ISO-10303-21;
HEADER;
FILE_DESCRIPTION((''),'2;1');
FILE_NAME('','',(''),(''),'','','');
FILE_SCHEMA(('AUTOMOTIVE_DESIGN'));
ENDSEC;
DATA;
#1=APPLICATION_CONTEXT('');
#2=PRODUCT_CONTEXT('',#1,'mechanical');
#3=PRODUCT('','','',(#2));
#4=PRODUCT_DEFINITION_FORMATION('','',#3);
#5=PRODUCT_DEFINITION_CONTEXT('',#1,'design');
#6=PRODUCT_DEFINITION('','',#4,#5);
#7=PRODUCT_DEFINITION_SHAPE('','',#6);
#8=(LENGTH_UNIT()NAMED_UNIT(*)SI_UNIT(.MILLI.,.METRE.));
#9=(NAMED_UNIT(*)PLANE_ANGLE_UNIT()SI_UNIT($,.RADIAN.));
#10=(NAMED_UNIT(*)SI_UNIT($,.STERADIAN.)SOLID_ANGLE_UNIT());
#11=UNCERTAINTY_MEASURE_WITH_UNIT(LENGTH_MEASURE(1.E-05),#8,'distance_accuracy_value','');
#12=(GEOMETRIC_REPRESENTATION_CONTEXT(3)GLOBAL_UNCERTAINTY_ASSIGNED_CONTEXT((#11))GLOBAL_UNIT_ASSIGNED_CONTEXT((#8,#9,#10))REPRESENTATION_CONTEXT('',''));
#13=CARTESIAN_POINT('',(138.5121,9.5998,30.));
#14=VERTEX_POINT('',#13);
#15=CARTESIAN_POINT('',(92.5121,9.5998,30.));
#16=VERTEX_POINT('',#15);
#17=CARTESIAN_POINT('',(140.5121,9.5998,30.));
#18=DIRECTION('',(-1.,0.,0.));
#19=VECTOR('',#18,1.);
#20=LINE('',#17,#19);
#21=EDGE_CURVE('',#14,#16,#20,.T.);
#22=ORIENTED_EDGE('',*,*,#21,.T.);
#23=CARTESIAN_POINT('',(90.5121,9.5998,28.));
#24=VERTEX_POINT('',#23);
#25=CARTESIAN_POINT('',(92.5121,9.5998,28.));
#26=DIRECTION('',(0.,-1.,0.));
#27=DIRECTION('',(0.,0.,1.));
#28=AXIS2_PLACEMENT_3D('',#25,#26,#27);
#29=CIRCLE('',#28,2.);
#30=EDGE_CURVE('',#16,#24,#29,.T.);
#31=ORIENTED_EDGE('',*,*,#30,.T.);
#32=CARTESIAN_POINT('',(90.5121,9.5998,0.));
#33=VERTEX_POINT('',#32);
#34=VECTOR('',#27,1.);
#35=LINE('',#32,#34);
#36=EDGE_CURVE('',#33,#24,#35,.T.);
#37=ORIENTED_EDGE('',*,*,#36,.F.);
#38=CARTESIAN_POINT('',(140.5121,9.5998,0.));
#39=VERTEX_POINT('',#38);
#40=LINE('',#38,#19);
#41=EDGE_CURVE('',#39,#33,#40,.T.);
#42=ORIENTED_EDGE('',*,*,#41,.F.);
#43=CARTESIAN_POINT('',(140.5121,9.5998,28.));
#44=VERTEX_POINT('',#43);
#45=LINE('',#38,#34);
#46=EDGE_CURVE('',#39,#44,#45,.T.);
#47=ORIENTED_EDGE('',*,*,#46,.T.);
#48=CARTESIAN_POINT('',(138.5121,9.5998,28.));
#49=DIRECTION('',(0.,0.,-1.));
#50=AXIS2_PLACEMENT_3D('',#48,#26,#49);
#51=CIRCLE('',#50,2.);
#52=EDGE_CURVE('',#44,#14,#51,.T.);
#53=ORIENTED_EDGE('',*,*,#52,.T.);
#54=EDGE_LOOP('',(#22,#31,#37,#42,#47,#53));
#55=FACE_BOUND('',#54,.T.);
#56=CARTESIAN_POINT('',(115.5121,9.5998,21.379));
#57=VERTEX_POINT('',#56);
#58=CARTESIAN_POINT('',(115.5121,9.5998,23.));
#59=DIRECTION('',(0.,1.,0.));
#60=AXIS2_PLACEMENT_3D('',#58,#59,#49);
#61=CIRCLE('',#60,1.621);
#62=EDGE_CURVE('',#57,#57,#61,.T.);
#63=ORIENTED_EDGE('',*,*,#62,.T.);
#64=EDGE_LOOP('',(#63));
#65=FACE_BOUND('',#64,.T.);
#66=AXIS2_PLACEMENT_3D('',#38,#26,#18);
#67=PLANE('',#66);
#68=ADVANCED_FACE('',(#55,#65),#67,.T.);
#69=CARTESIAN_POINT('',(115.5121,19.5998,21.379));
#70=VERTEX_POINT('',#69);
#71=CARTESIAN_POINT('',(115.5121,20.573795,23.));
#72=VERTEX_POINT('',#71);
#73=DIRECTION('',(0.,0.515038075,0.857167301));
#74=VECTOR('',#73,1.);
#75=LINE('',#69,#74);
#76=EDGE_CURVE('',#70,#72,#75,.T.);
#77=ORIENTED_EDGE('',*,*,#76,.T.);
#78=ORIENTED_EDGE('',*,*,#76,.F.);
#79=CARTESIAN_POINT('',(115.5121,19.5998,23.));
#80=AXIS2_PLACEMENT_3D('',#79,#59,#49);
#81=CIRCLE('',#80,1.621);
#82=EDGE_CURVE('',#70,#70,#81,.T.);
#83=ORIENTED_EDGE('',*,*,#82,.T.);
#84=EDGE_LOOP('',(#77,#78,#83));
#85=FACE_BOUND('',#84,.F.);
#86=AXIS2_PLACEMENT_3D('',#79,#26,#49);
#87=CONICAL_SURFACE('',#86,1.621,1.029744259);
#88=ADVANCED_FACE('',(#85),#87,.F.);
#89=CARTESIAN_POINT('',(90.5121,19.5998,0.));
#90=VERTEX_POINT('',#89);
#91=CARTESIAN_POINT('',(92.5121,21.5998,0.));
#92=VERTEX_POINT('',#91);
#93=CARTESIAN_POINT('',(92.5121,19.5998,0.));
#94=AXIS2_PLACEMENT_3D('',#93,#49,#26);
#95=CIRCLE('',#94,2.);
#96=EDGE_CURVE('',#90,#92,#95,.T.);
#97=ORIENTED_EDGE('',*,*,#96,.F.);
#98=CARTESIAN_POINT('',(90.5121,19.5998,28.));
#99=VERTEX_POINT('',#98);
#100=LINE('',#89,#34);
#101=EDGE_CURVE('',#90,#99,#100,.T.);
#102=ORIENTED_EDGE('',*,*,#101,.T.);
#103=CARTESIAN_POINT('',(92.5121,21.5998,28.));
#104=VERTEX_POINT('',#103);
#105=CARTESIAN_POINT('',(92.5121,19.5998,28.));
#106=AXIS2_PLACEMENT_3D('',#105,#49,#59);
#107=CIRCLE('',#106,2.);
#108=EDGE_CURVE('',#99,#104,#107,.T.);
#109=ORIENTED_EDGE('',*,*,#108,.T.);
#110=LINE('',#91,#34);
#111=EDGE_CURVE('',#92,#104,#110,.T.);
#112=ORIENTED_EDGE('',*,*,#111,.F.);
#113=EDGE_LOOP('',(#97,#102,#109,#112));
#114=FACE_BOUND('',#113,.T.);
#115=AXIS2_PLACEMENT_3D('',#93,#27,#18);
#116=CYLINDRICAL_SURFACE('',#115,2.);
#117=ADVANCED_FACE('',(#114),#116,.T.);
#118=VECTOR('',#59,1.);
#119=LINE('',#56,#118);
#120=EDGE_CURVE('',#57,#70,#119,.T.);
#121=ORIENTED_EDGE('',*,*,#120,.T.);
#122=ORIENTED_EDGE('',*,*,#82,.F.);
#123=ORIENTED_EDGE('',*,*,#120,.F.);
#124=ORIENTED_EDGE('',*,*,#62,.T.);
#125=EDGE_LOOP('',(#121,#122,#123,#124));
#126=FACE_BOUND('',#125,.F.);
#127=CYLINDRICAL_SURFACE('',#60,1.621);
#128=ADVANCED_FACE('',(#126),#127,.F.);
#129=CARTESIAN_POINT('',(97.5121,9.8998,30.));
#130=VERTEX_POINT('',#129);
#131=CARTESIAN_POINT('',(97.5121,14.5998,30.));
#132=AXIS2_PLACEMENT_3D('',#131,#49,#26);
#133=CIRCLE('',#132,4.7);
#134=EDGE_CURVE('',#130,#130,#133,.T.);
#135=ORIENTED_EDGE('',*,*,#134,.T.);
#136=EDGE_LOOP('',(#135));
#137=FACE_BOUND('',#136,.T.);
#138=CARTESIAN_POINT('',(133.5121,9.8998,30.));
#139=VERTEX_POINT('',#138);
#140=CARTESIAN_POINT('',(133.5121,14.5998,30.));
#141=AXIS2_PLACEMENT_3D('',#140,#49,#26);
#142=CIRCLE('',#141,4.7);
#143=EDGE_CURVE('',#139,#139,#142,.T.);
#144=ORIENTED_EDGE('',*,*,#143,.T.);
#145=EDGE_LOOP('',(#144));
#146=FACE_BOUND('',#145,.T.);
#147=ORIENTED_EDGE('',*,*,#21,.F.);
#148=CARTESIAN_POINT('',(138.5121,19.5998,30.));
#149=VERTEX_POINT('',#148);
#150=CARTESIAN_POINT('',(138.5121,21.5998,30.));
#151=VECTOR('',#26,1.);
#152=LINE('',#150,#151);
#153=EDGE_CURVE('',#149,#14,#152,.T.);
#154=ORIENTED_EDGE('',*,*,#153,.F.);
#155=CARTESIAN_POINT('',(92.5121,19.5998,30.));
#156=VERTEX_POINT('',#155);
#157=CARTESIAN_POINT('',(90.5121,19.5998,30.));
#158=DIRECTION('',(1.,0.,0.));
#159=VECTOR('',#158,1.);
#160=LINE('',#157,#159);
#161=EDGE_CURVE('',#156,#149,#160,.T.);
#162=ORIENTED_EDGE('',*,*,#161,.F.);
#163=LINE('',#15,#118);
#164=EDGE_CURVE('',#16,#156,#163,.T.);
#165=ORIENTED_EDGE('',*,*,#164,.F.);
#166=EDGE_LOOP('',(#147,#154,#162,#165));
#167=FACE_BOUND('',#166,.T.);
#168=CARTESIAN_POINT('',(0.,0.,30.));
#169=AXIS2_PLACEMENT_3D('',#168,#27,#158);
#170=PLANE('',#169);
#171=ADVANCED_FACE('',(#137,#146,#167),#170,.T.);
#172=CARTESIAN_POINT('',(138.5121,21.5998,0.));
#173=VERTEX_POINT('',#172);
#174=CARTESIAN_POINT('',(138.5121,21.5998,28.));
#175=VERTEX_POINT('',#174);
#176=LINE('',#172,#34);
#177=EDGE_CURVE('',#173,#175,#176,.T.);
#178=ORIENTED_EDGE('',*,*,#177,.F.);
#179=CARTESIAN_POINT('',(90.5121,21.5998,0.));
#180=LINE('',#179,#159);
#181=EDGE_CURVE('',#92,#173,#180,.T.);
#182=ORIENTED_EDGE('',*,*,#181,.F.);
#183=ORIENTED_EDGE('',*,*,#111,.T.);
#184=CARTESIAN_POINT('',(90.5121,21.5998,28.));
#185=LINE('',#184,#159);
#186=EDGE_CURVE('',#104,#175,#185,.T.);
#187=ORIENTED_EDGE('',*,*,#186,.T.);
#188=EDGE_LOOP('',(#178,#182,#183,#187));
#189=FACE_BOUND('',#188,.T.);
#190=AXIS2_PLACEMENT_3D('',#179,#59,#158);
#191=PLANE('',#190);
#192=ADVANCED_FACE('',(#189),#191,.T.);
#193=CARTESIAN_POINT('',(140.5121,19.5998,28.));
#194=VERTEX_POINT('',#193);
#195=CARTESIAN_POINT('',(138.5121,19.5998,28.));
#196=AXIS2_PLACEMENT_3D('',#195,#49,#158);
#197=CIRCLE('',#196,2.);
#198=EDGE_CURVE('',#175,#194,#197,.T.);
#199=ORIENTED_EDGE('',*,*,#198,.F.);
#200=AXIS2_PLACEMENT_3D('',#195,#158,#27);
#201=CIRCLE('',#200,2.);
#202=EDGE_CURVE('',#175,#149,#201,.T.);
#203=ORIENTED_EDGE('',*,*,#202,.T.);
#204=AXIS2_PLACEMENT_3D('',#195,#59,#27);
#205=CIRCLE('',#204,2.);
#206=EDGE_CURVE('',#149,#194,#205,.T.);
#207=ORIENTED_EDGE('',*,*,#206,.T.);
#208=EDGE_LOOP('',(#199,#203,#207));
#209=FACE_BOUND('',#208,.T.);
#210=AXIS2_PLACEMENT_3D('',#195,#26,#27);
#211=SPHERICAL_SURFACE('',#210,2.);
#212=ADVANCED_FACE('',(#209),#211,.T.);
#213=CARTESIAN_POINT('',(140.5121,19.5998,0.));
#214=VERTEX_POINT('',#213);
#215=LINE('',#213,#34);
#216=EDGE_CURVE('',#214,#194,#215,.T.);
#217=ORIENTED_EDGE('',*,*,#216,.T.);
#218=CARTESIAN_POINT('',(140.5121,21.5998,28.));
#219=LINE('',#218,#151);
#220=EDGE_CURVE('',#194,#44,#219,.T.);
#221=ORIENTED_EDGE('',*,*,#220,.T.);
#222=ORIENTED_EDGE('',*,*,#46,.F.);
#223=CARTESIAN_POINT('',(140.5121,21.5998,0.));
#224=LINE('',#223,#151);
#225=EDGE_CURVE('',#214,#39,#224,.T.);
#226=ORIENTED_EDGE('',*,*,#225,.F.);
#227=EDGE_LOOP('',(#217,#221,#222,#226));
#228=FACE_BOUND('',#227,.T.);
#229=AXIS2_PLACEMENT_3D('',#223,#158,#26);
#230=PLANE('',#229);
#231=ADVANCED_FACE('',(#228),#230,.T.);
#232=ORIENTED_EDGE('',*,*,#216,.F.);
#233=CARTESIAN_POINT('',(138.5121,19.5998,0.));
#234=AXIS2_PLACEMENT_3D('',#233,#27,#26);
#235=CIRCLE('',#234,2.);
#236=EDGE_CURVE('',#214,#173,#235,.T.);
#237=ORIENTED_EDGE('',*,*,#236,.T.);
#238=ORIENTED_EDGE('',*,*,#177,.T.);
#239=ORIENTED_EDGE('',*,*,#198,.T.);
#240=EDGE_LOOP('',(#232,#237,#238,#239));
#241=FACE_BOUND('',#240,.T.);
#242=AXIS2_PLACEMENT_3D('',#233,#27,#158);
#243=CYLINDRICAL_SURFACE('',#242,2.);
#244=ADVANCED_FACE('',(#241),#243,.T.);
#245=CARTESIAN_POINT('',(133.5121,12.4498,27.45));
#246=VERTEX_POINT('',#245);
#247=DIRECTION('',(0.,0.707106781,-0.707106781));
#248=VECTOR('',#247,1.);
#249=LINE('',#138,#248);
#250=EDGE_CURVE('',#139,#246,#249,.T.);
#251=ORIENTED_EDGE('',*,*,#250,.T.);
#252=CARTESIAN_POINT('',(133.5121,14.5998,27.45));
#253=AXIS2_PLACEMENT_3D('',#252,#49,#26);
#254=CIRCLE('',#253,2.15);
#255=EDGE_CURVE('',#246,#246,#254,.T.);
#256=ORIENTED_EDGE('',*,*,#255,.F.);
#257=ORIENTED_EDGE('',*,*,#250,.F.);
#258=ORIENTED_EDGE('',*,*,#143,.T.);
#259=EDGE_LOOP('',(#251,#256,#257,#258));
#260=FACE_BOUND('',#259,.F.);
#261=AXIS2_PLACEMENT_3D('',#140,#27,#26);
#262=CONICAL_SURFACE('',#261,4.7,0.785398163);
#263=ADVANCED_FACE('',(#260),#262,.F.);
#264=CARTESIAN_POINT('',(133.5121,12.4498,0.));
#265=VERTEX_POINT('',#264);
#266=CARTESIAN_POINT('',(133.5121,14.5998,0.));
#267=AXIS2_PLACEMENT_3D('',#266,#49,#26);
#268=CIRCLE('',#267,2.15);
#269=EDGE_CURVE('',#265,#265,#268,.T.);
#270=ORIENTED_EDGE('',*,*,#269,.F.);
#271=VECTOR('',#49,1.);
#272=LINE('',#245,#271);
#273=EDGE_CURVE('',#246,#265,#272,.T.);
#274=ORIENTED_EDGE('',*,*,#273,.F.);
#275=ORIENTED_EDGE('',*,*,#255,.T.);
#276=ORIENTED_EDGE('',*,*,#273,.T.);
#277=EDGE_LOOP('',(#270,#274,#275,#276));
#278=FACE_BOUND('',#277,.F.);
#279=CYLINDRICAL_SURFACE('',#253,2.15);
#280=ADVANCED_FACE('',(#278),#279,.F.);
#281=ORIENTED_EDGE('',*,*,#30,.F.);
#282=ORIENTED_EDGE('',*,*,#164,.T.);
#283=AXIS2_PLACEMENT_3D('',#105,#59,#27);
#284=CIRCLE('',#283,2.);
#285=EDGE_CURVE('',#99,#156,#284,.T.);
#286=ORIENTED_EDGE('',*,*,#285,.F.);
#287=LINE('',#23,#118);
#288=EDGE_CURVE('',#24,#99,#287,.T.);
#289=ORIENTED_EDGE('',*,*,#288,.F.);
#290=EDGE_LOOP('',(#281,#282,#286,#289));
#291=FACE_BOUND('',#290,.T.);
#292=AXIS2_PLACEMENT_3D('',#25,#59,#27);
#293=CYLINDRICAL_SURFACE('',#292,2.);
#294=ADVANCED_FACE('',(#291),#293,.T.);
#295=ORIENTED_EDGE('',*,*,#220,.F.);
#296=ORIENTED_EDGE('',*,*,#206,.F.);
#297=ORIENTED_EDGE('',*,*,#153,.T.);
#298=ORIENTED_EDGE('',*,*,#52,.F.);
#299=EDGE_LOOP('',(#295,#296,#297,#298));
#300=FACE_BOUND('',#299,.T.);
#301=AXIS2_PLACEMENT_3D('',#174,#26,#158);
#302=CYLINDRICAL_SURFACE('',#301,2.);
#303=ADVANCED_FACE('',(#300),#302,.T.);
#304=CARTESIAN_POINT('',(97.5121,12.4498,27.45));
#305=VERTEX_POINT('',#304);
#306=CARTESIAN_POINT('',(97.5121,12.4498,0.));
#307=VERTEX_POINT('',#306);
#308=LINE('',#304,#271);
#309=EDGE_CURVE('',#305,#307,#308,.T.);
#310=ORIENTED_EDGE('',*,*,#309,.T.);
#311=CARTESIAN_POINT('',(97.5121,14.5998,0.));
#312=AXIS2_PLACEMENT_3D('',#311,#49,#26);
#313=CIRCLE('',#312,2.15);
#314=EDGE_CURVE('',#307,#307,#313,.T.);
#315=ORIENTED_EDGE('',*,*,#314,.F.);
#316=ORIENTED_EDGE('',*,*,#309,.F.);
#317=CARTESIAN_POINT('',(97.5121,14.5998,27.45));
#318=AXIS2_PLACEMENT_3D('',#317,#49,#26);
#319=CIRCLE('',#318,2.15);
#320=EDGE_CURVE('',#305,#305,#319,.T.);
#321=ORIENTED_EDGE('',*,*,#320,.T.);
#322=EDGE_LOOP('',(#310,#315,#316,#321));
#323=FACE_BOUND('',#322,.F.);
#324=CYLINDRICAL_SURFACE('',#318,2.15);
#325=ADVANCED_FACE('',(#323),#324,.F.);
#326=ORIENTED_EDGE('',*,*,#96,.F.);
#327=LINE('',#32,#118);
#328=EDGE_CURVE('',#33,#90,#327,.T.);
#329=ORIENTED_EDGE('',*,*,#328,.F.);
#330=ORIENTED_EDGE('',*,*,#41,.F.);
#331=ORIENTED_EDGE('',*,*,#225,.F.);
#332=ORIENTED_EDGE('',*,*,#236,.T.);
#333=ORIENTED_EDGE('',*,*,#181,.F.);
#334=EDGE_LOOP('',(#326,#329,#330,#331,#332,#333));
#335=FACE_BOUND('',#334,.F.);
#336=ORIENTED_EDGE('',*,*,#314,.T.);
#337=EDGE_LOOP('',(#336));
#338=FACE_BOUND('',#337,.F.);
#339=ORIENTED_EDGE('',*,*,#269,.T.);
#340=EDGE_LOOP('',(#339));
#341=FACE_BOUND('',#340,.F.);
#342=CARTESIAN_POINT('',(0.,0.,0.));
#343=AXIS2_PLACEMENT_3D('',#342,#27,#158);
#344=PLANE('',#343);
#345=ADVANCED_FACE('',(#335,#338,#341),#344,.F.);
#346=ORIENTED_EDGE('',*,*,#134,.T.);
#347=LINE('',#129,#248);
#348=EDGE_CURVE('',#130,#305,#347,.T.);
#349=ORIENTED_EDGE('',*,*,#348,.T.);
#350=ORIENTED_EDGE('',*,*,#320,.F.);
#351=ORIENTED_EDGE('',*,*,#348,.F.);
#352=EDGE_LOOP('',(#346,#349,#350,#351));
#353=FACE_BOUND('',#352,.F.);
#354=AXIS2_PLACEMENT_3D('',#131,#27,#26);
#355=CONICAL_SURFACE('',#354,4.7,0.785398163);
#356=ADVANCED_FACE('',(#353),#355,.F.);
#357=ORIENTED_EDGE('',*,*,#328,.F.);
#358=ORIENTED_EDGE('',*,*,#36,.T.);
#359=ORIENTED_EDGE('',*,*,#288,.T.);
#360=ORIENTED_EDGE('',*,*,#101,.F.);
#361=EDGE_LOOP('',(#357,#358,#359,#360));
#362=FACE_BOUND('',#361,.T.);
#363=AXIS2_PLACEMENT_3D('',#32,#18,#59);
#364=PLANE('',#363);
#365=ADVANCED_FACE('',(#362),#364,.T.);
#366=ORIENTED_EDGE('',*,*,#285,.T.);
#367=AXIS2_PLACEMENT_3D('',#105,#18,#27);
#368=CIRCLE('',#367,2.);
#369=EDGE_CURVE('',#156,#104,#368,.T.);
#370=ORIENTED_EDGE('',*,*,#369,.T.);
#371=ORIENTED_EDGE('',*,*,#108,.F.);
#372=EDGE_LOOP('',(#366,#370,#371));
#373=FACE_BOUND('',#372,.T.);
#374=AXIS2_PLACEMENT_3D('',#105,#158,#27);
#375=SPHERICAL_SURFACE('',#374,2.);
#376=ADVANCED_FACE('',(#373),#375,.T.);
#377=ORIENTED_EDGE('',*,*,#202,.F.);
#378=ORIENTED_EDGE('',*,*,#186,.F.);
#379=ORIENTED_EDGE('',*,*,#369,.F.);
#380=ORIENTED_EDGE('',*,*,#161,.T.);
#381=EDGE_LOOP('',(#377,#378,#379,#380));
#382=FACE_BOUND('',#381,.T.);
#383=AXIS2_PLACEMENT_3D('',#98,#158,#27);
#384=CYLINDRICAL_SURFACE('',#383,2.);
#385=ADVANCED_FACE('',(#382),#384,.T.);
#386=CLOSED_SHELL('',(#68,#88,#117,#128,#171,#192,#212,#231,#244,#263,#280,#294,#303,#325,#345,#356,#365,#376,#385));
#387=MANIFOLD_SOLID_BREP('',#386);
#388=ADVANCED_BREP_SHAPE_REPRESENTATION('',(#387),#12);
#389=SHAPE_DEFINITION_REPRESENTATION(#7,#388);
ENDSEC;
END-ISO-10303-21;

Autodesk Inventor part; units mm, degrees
ref_plane "YZ Plane" through (0, 0, 0) normal (1, 0, 0) x (0, 1, 0)
ref_plane "XZ Plane" through (0, 0, 0) normal (0, 1, 0) x (-1, 0, 0)
ref_plane "XY Plane" through (0, 0, 0) normal (0, 0, 1) x (1, 0, 0)
sketch "Skizze1" plane through (0, 0, 0) normal (0, 0, 1) x (1, 0, 0)
  line L0 (140.5121, 9.5998) -> (90.5121, 9.5998)
  line L1 (90.5121, 9.5998) -> (90.5121, 21.5998)
  line L2 (90.5121, 21.5998) -> (140.5121, 21.5998)
  line L3 (140.5121, 21.5998) -> (140.5121, 9.5998)
  point P0 (0, 0)
  dimension "d0" = 50
  dimension "d1" = 12
extrude "Extrusion1" add sketch "Skizze1" along normal blind 30
sketch "Skizze2" plane through (0, 0, 30) normal (0, 0, 1) x (1, 0, 0)
  line L0 (140.5121, 9.5998) -> (140.5121, 21.5998) projected
  line L1 (140.5121, 14.5998) -> (133.5121, 14.5998)
  line L2 (133.5121, 14.5998) -> (97.5121, 14.5998)
  line L3 (97.5121, 14.5998) -> (90.5121, 14.5998)
  line L4 (90.5121, 21.5998) -> (90.5121, 9.5998) projected
  line L5 (140.5121, 21.5998) -> (90.5121, 21.5998) projected
  point P0 (0, 0)
  dimension "d4" = 7
  dimension "d12" = 7
hole "Bohrung1" at (133.5121, 14.5998, 30) at (97.5121, 14.5998, 30) direction (0, 0, -1) diameter 4.3 end through all countersink diameter 9.4 countersink angle 90 clearance for "Flachkopfmaschinenschraube" size "M4" standard "ANSI Metrisches M Profil"
sketch "Skizze3" plane through (90.5121, 9.5998, 0) normal (0, 1, 0) x (1, 0, 0)
  line L0 (25, -23) -> (25, -30)
  line L1 (50, -30) -> (0, -30) projected
  point P0 (-90.5121, 0)
  dimension "d14" = 7
hole "Bohrung4" at (115.5121, 9.5998, 23) direction (0, 1, 0) diameter 3.242 depth 10 tip angle 118 thread size "M4x0.7" class "6H" standard "ANSI Metric M Profile"
fillet "Rundung2" radius 2 5 edges at (140.5121, 15.5998, 30) (115.5121, 21.5998, 30) (90.5121, 15.5998, 30) (140.5121, 21.5998, 15) (90.5121, 21.5998, 15)
properties part number "HebelhalterBlock" material "Aluminium 6061(1)"
